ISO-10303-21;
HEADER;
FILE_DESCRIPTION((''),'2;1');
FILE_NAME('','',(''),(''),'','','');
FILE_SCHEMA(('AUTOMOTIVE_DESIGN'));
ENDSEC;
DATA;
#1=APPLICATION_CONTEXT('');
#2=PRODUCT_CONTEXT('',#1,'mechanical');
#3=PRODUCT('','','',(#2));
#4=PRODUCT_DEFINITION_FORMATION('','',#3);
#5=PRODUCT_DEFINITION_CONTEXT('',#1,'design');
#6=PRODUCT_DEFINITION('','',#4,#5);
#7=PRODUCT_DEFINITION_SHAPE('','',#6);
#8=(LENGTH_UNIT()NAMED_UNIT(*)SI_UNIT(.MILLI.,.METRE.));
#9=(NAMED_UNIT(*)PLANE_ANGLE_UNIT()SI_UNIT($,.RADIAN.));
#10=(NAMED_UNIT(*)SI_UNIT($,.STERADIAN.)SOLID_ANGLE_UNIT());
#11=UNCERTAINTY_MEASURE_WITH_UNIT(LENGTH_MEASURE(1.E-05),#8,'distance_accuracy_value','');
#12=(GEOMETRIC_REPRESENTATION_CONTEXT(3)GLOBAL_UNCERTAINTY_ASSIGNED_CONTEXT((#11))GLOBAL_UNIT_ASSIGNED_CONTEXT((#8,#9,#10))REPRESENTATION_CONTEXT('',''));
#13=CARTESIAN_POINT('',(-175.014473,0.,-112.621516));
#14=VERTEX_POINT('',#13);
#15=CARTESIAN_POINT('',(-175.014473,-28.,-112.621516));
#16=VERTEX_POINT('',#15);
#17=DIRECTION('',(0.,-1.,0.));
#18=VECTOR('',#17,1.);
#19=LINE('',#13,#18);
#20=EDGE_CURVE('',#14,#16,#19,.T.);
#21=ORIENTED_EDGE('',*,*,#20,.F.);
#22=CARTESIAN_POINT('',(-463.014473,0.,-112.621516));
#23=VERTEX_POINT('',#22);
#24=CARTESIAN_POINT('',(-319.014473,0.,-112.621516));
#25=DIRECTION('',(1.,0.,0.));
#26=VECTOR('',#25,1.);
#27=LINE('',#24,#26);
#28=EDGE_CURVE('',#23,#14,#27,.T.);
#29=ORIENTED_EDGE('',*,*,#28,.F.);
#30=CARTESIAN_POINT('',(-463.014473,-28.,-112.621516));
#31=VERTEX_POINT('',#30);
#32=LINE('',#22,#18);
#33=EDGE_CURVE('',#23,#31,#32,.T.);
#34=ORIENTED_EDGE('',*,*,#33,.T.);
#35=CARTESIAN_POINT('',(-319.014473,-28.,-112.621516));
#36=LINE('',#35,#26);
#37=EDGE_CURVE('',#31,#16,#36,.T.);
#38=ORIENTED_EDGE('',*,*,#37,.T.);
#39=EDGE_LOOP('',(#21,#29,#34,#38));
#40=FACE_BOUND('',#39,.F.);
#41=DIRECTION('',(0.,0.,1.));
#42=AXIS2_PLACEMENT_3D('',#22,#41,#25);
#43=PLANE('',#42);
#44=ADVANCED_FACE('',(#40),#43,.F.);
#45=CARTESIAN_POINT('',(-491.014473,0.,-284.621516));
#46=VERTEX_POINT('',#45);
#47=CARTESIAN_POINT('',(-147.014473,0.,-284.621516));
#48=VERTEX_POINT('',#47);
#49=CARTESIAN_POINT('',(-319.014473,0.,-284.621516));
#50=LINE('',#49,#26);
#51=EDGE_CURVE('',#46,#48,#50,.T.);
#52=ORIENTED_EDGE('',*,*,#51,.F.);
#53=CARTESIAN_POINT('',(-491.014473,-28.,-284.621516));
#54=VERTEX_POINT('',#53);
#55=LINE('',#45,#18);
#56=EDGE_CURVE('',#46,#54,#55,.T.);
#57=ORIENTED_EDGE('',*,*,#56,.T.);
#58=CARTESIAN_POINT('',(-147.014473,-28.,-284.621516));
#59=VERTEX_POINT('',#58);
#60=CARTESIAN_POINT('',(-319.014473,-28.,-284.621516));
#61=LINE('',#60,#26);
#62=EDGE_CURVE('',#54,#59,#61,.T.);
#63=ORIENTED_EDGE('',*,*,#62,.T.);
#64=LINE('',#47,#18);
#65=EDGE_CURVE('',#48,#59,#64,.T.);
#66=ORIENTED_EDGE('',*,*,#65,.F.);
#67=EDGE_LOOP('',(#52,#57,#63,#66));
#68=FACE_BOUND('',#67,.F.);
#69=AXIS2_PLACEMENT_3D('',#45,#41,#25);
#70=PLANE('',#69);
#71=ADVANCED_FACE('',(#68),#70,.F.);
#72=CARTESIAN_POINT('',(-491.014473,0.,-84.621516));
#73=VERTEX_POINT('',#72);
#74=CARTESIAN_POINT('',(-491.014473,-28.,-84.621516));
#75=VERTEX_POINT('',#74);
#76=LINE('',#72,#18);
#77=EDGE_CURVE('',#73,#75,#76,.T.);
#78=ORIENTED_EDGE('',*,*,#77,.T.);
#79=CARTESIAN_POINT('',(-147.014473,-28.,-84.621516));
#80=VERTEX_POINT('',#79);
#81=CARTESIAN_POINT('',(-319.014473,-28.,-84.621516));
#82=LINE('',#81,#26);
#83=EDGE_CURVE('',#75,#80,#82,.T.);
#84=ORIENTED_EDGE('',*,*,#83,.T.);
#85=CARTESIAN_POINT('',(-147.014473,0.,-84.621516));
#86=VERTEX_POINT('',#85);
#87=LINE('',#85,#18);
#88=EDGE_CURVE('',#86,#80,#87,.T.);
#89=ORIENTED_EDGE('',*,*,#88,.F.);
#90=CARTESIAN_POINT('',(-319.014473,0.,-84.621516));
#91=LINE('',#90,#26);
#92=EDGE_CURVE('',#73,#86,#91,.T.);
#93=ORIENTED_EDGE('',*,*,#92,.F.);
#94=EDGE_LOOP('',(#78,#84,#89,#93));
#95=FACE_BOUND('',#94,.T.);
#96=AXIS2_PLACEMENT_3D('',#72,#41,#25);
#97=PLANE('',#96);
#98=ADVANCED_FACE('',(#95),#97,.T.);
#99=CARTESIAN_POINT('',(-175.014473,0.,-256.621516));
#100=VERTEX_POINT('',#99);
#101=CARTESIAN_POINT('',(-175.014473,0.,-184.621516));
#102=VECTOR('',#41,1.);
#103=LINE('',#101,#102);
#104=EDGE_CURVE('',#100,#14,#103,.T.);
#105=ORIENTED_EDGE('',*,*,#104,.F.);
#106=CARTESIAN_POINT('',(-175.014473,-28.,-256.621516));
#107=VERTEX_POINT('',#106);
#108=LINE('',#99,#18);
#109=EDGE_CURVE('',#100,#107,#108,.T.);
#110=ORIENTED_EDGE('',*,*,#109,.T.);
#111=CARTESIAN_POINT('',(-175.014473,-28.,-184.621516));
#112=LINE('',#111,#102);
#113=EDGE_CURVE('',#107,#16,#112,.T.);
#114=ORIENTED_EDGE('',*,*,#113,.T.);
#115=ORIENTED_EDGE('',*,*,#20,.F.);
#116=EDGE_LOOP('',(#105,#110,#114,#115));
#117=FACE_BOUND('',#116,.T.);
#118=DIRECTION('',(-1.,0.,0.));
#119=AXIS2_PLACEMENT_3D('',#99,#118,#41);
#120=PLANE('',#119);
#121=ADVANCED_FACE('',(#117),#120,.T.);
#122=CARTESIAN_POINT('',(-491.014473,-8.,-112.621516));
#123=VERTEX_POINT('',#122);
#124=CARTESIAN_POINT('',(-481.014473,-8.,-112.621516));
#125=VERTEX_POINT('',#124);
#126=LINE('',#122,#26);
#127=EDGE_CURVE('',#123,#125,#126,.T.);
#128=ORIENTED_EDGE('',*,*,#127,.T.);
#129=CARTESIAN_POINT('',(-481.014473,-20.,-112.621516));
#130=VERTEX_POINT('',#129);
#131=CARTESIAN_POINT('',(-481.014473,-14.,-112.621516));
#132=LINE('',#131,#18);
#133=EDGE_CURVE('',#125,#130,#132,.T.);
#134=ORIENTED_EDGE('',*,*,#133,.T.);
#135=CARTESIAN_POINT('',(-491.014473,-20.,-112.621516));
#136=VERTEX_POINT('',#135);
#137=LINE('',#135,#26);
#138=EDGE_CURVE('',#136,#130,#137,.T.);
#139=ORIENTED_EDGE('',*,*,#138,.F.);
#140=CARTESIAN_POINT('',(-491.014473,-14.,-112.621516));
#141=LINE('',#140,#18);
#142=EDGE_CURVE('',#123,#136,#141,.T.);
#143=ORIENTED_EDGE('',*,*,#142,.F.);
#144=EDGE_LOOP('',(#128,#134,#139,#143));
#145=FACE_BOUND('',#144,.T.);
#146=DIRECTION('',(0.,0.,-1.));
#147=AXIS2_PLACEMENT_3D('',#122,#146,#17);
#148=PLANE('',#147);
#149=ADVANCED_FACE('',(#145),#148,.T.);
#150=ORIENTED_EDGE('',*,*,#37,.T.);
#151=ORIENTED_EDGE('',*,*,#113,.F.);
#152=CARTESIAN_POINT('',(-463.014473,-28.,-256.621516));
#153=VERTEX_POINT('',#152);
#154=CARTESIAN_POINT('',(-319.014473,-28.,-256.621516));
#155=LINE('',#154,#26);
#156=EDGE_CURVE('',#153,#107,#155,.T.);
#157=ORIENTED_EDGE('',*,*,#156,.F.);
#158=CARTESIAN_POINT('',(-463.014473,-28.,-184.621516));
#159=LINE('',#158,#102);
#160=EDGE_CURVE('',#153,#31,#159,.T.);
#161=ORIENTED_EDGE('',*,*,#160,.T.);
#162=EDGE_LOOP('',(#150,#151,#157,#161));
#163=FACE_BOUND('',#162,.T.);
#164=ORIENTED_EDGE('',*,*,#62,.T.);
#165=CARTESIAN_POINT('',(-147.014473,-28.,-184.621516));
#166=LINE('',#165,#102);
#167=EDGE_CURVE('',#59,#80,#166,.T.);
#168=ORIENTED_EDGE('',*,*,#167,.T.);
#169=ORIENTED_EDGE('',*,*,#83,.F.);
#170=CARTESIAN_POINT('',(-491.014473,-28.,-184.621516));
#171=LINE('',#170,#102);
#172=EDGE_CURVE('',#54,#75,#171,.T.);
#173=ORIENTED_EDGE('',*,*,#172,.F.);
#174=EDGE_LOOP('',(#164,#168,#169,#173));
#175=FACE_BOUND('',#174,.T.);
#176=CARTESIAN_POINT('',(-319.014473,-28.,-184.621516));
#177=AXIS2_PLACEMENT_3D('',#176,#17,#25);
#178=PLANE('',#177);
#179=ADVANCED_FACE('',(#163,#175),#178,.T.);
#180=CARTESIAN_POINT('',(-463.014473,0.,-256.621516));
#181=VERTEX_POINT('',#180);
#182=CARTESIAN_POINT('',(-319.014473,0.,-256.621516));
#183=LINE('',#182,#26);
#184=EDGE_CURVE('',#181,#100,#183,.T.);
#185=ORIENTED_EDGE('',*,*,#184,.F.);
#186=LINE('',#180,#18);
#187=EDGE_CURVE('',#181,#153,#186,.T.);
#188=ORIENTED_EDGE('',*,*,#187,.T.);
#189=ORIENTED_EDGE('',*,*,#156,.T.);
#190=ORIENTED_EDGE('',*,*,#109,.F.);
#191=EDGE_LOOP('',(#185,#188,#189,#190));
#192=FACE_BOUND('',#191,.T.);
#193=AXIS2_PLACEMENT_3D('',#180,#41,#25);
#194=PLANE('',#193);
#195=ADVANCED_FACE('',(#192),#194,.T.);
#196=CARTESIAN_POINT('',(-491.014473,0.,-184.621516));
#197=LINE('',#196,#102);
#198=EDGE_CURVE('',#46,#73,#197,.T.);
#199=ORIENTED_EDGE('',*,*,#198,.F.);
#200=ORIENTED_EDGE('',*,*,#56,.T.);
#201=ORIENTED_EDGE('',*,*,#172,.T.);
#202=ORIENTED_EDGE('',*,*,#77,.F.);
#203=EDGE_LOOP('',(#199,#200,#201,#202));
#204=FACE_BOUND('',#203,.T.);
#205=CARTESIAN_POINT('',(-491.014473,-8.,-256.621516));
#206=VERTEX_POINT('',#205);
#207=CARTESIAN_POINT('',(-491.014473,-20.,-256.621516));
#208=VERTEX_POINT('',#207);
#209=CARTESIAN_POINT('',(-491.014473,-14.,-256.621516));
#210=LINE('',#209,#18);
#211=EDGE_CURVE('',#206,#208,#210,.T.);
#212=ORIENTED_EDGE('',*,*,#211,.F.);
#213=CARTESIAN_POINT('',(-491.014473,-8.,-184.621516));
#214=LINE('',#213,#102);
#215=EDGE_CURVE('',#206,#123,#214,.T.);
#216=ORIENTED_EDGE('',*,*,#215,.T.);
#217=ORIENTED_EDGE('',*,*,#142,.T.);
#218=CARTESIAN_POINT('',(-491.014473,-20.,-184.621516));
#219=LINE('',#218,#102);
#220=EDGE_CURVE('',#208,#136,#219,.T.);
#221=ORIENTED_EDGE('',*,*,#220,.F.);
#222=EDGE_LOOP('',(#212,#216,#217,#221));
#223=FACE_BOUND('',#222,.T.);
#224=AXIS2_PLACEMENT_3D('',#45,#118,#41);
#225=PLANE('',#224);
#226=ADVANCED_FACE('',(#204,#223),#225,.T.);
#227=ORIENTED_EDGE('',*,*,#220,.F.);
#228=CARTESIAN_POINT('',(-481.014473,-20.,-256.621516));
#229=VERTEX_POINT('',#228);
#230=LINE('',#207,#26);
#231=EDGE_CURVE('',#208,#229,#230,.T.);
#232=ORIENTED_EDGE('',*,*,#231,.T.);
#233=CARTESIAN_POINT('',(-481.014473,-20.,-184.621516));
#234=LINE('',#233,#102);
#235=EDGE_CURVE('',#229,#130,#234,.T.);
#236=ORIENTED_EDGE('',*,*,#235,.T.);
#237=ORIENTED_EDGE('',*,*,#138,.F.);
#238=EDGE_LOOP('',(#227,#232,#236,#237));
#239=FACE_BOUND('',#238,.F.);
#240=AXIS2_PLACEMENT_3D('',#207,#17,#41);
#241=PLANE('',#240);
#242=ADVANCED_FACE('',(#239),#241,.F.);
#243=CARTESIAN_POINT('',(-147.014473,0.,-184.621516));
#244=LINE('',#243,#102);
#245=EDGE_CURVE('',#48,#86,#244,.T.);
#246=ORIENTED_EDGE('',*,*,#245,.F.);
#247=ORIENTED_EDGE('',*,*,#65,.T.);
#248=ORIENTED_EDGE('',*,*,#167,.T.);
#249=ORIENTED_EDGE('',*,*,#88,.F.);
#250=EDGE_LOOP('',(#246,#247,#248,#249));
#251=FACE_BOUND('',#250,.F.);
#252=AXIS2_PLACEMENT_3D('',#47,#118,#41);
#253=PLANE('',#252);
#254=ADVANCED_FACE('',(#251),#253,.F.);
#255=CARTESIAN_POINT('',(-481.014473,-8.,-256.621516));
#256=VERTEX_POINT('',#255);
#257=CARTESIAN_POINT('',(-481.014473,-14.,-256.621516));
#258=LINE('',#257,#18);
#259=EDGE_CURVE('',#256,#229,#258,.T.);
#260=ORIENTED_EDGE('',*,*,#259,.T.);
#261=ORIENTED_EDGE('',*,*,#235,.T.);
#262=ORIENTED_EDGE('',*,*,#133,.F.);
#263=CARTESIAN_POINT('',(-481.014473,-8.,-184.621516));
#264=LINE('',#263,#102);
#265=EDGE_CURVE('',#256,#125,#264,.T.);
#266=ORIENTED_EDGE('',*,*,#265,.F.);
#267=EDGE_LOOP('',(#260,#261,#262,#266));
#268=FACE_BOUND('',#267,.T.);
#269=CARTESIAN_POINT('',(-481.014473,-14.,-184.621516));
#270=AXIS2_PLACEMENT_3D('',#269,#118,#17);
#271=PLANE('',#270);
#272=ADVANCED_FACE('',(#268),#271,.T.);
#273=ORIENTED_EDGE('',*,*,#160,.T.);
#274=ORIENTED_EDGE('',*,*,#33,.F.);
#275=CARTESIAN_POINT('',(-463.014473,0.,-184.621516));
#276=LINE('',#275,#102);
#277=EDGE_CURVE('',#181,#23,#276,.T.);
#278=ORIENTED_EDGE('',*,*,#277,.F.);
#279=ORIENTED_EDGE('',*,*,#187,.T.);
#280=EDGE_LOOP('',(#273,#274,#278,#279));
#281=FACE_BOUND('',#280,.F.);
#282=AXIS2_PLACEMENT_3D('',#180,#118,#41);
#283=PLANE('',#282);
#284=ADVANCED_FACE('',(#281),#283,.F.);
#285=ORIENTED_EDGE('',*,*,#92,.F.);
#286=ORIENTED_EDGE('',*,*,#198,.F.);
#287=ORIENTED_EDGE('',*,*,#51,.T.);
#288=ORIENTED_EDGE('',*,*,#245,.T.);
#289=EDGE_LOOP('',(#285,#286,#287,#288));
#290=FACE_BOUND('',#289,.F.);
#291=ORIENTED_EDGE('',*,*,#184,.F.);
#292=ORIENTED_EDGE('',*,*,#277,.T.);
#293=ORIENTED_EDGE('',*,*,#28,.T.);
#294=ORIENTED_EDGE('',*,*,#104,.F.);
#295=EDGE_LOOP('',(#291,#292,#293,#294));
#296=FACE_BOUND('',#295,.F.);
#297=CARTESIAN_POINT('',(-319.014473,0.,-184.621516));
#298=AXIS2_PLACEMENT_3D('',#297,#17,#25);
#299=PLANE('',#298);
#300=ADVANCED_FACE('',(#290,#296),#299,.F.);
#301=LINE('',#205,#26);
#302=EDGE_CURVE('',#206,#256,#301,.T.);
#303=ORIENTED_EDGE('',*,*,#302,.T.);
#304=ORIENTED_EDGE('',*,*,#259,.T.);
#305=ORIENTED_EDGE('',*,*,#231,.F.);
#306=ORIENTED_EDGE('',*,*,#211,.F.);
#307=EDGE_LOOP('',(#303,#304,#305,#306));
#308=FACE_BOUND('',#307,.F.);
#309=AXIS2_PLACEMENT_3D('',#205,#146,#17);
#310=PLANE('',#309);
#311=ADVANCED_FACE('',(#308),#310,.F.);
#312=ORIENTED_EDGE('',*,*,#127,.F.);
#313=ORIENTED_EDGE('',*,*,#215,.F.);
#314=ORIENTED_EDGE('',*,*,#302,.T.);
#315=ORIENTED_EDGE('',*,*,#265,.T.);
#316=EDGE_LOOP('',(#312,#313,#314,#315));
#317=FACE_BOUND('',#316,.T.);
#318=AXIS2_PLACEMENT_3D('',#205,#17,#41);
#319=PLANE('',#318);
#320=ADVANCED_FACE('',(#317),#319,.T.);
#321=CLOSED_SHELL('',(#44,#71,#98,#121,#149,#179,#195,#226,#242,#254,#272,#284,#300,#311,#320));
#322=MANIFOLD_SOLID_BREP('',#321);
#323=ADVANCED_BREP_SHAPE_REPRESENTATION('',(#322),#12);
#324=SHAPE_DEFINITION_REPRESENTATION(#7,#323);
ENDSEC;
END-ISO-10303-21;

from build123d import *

# Parameters (mm, degrees)
F0_W          = 860
F0_H          = 500
F0_W_2        = 720
F0_H_2        = 360
F1_DEPTH      = 70
F3_W          = 30
F3_H          = 360
F4_DEPTH      = 25
F4_DEPTH_BACK = 25
F5_SCALE      = 0.4


# Not quite as in the source:
# - a feature names something its author has since deleted; it is built from what else it names


with BuildPart() as f1:
    # F0 (on Front) → F1 (new body)
    with BuildSketch(Plane.XZ):
        with Locations((-61.0144731402, -34.6215157021)):
            Rectangle(F0_W, F0_H)
        with Locations((-61.0144731402, -34.6215157021)):
            Rectangle(F0_W_2, F0_H_2, mode=Mode.SUBTRACT)
    extrude(amount=F1_DEPTH)

    # F3 (on face) → F4 (cut, two sides)
    with BuildSketch(Plane(origin=(-491.0144731402, 0, 0), x_dir=(0, -1, 0), z_dir=(-1, 0, 0))) as f4_sk:
        with Locations((35, -34.6215157021)):
            Rectangle(F3_W, F3_H)
    extrude(amount=F4_DEPTH, mode=Mode.SUBTRACT)
    extrude(f4_sk.sketch, amount=-F4_DEPTH_BACK, mode=Mode.SUBTRACT)


with BuildPart() as f1_1:
    # F5: moved
    add(f1.part.scale(F5_SCALE).moved(Location((-294.6086838841, 0, -170.7729094213))))


solid = f1_1.part
